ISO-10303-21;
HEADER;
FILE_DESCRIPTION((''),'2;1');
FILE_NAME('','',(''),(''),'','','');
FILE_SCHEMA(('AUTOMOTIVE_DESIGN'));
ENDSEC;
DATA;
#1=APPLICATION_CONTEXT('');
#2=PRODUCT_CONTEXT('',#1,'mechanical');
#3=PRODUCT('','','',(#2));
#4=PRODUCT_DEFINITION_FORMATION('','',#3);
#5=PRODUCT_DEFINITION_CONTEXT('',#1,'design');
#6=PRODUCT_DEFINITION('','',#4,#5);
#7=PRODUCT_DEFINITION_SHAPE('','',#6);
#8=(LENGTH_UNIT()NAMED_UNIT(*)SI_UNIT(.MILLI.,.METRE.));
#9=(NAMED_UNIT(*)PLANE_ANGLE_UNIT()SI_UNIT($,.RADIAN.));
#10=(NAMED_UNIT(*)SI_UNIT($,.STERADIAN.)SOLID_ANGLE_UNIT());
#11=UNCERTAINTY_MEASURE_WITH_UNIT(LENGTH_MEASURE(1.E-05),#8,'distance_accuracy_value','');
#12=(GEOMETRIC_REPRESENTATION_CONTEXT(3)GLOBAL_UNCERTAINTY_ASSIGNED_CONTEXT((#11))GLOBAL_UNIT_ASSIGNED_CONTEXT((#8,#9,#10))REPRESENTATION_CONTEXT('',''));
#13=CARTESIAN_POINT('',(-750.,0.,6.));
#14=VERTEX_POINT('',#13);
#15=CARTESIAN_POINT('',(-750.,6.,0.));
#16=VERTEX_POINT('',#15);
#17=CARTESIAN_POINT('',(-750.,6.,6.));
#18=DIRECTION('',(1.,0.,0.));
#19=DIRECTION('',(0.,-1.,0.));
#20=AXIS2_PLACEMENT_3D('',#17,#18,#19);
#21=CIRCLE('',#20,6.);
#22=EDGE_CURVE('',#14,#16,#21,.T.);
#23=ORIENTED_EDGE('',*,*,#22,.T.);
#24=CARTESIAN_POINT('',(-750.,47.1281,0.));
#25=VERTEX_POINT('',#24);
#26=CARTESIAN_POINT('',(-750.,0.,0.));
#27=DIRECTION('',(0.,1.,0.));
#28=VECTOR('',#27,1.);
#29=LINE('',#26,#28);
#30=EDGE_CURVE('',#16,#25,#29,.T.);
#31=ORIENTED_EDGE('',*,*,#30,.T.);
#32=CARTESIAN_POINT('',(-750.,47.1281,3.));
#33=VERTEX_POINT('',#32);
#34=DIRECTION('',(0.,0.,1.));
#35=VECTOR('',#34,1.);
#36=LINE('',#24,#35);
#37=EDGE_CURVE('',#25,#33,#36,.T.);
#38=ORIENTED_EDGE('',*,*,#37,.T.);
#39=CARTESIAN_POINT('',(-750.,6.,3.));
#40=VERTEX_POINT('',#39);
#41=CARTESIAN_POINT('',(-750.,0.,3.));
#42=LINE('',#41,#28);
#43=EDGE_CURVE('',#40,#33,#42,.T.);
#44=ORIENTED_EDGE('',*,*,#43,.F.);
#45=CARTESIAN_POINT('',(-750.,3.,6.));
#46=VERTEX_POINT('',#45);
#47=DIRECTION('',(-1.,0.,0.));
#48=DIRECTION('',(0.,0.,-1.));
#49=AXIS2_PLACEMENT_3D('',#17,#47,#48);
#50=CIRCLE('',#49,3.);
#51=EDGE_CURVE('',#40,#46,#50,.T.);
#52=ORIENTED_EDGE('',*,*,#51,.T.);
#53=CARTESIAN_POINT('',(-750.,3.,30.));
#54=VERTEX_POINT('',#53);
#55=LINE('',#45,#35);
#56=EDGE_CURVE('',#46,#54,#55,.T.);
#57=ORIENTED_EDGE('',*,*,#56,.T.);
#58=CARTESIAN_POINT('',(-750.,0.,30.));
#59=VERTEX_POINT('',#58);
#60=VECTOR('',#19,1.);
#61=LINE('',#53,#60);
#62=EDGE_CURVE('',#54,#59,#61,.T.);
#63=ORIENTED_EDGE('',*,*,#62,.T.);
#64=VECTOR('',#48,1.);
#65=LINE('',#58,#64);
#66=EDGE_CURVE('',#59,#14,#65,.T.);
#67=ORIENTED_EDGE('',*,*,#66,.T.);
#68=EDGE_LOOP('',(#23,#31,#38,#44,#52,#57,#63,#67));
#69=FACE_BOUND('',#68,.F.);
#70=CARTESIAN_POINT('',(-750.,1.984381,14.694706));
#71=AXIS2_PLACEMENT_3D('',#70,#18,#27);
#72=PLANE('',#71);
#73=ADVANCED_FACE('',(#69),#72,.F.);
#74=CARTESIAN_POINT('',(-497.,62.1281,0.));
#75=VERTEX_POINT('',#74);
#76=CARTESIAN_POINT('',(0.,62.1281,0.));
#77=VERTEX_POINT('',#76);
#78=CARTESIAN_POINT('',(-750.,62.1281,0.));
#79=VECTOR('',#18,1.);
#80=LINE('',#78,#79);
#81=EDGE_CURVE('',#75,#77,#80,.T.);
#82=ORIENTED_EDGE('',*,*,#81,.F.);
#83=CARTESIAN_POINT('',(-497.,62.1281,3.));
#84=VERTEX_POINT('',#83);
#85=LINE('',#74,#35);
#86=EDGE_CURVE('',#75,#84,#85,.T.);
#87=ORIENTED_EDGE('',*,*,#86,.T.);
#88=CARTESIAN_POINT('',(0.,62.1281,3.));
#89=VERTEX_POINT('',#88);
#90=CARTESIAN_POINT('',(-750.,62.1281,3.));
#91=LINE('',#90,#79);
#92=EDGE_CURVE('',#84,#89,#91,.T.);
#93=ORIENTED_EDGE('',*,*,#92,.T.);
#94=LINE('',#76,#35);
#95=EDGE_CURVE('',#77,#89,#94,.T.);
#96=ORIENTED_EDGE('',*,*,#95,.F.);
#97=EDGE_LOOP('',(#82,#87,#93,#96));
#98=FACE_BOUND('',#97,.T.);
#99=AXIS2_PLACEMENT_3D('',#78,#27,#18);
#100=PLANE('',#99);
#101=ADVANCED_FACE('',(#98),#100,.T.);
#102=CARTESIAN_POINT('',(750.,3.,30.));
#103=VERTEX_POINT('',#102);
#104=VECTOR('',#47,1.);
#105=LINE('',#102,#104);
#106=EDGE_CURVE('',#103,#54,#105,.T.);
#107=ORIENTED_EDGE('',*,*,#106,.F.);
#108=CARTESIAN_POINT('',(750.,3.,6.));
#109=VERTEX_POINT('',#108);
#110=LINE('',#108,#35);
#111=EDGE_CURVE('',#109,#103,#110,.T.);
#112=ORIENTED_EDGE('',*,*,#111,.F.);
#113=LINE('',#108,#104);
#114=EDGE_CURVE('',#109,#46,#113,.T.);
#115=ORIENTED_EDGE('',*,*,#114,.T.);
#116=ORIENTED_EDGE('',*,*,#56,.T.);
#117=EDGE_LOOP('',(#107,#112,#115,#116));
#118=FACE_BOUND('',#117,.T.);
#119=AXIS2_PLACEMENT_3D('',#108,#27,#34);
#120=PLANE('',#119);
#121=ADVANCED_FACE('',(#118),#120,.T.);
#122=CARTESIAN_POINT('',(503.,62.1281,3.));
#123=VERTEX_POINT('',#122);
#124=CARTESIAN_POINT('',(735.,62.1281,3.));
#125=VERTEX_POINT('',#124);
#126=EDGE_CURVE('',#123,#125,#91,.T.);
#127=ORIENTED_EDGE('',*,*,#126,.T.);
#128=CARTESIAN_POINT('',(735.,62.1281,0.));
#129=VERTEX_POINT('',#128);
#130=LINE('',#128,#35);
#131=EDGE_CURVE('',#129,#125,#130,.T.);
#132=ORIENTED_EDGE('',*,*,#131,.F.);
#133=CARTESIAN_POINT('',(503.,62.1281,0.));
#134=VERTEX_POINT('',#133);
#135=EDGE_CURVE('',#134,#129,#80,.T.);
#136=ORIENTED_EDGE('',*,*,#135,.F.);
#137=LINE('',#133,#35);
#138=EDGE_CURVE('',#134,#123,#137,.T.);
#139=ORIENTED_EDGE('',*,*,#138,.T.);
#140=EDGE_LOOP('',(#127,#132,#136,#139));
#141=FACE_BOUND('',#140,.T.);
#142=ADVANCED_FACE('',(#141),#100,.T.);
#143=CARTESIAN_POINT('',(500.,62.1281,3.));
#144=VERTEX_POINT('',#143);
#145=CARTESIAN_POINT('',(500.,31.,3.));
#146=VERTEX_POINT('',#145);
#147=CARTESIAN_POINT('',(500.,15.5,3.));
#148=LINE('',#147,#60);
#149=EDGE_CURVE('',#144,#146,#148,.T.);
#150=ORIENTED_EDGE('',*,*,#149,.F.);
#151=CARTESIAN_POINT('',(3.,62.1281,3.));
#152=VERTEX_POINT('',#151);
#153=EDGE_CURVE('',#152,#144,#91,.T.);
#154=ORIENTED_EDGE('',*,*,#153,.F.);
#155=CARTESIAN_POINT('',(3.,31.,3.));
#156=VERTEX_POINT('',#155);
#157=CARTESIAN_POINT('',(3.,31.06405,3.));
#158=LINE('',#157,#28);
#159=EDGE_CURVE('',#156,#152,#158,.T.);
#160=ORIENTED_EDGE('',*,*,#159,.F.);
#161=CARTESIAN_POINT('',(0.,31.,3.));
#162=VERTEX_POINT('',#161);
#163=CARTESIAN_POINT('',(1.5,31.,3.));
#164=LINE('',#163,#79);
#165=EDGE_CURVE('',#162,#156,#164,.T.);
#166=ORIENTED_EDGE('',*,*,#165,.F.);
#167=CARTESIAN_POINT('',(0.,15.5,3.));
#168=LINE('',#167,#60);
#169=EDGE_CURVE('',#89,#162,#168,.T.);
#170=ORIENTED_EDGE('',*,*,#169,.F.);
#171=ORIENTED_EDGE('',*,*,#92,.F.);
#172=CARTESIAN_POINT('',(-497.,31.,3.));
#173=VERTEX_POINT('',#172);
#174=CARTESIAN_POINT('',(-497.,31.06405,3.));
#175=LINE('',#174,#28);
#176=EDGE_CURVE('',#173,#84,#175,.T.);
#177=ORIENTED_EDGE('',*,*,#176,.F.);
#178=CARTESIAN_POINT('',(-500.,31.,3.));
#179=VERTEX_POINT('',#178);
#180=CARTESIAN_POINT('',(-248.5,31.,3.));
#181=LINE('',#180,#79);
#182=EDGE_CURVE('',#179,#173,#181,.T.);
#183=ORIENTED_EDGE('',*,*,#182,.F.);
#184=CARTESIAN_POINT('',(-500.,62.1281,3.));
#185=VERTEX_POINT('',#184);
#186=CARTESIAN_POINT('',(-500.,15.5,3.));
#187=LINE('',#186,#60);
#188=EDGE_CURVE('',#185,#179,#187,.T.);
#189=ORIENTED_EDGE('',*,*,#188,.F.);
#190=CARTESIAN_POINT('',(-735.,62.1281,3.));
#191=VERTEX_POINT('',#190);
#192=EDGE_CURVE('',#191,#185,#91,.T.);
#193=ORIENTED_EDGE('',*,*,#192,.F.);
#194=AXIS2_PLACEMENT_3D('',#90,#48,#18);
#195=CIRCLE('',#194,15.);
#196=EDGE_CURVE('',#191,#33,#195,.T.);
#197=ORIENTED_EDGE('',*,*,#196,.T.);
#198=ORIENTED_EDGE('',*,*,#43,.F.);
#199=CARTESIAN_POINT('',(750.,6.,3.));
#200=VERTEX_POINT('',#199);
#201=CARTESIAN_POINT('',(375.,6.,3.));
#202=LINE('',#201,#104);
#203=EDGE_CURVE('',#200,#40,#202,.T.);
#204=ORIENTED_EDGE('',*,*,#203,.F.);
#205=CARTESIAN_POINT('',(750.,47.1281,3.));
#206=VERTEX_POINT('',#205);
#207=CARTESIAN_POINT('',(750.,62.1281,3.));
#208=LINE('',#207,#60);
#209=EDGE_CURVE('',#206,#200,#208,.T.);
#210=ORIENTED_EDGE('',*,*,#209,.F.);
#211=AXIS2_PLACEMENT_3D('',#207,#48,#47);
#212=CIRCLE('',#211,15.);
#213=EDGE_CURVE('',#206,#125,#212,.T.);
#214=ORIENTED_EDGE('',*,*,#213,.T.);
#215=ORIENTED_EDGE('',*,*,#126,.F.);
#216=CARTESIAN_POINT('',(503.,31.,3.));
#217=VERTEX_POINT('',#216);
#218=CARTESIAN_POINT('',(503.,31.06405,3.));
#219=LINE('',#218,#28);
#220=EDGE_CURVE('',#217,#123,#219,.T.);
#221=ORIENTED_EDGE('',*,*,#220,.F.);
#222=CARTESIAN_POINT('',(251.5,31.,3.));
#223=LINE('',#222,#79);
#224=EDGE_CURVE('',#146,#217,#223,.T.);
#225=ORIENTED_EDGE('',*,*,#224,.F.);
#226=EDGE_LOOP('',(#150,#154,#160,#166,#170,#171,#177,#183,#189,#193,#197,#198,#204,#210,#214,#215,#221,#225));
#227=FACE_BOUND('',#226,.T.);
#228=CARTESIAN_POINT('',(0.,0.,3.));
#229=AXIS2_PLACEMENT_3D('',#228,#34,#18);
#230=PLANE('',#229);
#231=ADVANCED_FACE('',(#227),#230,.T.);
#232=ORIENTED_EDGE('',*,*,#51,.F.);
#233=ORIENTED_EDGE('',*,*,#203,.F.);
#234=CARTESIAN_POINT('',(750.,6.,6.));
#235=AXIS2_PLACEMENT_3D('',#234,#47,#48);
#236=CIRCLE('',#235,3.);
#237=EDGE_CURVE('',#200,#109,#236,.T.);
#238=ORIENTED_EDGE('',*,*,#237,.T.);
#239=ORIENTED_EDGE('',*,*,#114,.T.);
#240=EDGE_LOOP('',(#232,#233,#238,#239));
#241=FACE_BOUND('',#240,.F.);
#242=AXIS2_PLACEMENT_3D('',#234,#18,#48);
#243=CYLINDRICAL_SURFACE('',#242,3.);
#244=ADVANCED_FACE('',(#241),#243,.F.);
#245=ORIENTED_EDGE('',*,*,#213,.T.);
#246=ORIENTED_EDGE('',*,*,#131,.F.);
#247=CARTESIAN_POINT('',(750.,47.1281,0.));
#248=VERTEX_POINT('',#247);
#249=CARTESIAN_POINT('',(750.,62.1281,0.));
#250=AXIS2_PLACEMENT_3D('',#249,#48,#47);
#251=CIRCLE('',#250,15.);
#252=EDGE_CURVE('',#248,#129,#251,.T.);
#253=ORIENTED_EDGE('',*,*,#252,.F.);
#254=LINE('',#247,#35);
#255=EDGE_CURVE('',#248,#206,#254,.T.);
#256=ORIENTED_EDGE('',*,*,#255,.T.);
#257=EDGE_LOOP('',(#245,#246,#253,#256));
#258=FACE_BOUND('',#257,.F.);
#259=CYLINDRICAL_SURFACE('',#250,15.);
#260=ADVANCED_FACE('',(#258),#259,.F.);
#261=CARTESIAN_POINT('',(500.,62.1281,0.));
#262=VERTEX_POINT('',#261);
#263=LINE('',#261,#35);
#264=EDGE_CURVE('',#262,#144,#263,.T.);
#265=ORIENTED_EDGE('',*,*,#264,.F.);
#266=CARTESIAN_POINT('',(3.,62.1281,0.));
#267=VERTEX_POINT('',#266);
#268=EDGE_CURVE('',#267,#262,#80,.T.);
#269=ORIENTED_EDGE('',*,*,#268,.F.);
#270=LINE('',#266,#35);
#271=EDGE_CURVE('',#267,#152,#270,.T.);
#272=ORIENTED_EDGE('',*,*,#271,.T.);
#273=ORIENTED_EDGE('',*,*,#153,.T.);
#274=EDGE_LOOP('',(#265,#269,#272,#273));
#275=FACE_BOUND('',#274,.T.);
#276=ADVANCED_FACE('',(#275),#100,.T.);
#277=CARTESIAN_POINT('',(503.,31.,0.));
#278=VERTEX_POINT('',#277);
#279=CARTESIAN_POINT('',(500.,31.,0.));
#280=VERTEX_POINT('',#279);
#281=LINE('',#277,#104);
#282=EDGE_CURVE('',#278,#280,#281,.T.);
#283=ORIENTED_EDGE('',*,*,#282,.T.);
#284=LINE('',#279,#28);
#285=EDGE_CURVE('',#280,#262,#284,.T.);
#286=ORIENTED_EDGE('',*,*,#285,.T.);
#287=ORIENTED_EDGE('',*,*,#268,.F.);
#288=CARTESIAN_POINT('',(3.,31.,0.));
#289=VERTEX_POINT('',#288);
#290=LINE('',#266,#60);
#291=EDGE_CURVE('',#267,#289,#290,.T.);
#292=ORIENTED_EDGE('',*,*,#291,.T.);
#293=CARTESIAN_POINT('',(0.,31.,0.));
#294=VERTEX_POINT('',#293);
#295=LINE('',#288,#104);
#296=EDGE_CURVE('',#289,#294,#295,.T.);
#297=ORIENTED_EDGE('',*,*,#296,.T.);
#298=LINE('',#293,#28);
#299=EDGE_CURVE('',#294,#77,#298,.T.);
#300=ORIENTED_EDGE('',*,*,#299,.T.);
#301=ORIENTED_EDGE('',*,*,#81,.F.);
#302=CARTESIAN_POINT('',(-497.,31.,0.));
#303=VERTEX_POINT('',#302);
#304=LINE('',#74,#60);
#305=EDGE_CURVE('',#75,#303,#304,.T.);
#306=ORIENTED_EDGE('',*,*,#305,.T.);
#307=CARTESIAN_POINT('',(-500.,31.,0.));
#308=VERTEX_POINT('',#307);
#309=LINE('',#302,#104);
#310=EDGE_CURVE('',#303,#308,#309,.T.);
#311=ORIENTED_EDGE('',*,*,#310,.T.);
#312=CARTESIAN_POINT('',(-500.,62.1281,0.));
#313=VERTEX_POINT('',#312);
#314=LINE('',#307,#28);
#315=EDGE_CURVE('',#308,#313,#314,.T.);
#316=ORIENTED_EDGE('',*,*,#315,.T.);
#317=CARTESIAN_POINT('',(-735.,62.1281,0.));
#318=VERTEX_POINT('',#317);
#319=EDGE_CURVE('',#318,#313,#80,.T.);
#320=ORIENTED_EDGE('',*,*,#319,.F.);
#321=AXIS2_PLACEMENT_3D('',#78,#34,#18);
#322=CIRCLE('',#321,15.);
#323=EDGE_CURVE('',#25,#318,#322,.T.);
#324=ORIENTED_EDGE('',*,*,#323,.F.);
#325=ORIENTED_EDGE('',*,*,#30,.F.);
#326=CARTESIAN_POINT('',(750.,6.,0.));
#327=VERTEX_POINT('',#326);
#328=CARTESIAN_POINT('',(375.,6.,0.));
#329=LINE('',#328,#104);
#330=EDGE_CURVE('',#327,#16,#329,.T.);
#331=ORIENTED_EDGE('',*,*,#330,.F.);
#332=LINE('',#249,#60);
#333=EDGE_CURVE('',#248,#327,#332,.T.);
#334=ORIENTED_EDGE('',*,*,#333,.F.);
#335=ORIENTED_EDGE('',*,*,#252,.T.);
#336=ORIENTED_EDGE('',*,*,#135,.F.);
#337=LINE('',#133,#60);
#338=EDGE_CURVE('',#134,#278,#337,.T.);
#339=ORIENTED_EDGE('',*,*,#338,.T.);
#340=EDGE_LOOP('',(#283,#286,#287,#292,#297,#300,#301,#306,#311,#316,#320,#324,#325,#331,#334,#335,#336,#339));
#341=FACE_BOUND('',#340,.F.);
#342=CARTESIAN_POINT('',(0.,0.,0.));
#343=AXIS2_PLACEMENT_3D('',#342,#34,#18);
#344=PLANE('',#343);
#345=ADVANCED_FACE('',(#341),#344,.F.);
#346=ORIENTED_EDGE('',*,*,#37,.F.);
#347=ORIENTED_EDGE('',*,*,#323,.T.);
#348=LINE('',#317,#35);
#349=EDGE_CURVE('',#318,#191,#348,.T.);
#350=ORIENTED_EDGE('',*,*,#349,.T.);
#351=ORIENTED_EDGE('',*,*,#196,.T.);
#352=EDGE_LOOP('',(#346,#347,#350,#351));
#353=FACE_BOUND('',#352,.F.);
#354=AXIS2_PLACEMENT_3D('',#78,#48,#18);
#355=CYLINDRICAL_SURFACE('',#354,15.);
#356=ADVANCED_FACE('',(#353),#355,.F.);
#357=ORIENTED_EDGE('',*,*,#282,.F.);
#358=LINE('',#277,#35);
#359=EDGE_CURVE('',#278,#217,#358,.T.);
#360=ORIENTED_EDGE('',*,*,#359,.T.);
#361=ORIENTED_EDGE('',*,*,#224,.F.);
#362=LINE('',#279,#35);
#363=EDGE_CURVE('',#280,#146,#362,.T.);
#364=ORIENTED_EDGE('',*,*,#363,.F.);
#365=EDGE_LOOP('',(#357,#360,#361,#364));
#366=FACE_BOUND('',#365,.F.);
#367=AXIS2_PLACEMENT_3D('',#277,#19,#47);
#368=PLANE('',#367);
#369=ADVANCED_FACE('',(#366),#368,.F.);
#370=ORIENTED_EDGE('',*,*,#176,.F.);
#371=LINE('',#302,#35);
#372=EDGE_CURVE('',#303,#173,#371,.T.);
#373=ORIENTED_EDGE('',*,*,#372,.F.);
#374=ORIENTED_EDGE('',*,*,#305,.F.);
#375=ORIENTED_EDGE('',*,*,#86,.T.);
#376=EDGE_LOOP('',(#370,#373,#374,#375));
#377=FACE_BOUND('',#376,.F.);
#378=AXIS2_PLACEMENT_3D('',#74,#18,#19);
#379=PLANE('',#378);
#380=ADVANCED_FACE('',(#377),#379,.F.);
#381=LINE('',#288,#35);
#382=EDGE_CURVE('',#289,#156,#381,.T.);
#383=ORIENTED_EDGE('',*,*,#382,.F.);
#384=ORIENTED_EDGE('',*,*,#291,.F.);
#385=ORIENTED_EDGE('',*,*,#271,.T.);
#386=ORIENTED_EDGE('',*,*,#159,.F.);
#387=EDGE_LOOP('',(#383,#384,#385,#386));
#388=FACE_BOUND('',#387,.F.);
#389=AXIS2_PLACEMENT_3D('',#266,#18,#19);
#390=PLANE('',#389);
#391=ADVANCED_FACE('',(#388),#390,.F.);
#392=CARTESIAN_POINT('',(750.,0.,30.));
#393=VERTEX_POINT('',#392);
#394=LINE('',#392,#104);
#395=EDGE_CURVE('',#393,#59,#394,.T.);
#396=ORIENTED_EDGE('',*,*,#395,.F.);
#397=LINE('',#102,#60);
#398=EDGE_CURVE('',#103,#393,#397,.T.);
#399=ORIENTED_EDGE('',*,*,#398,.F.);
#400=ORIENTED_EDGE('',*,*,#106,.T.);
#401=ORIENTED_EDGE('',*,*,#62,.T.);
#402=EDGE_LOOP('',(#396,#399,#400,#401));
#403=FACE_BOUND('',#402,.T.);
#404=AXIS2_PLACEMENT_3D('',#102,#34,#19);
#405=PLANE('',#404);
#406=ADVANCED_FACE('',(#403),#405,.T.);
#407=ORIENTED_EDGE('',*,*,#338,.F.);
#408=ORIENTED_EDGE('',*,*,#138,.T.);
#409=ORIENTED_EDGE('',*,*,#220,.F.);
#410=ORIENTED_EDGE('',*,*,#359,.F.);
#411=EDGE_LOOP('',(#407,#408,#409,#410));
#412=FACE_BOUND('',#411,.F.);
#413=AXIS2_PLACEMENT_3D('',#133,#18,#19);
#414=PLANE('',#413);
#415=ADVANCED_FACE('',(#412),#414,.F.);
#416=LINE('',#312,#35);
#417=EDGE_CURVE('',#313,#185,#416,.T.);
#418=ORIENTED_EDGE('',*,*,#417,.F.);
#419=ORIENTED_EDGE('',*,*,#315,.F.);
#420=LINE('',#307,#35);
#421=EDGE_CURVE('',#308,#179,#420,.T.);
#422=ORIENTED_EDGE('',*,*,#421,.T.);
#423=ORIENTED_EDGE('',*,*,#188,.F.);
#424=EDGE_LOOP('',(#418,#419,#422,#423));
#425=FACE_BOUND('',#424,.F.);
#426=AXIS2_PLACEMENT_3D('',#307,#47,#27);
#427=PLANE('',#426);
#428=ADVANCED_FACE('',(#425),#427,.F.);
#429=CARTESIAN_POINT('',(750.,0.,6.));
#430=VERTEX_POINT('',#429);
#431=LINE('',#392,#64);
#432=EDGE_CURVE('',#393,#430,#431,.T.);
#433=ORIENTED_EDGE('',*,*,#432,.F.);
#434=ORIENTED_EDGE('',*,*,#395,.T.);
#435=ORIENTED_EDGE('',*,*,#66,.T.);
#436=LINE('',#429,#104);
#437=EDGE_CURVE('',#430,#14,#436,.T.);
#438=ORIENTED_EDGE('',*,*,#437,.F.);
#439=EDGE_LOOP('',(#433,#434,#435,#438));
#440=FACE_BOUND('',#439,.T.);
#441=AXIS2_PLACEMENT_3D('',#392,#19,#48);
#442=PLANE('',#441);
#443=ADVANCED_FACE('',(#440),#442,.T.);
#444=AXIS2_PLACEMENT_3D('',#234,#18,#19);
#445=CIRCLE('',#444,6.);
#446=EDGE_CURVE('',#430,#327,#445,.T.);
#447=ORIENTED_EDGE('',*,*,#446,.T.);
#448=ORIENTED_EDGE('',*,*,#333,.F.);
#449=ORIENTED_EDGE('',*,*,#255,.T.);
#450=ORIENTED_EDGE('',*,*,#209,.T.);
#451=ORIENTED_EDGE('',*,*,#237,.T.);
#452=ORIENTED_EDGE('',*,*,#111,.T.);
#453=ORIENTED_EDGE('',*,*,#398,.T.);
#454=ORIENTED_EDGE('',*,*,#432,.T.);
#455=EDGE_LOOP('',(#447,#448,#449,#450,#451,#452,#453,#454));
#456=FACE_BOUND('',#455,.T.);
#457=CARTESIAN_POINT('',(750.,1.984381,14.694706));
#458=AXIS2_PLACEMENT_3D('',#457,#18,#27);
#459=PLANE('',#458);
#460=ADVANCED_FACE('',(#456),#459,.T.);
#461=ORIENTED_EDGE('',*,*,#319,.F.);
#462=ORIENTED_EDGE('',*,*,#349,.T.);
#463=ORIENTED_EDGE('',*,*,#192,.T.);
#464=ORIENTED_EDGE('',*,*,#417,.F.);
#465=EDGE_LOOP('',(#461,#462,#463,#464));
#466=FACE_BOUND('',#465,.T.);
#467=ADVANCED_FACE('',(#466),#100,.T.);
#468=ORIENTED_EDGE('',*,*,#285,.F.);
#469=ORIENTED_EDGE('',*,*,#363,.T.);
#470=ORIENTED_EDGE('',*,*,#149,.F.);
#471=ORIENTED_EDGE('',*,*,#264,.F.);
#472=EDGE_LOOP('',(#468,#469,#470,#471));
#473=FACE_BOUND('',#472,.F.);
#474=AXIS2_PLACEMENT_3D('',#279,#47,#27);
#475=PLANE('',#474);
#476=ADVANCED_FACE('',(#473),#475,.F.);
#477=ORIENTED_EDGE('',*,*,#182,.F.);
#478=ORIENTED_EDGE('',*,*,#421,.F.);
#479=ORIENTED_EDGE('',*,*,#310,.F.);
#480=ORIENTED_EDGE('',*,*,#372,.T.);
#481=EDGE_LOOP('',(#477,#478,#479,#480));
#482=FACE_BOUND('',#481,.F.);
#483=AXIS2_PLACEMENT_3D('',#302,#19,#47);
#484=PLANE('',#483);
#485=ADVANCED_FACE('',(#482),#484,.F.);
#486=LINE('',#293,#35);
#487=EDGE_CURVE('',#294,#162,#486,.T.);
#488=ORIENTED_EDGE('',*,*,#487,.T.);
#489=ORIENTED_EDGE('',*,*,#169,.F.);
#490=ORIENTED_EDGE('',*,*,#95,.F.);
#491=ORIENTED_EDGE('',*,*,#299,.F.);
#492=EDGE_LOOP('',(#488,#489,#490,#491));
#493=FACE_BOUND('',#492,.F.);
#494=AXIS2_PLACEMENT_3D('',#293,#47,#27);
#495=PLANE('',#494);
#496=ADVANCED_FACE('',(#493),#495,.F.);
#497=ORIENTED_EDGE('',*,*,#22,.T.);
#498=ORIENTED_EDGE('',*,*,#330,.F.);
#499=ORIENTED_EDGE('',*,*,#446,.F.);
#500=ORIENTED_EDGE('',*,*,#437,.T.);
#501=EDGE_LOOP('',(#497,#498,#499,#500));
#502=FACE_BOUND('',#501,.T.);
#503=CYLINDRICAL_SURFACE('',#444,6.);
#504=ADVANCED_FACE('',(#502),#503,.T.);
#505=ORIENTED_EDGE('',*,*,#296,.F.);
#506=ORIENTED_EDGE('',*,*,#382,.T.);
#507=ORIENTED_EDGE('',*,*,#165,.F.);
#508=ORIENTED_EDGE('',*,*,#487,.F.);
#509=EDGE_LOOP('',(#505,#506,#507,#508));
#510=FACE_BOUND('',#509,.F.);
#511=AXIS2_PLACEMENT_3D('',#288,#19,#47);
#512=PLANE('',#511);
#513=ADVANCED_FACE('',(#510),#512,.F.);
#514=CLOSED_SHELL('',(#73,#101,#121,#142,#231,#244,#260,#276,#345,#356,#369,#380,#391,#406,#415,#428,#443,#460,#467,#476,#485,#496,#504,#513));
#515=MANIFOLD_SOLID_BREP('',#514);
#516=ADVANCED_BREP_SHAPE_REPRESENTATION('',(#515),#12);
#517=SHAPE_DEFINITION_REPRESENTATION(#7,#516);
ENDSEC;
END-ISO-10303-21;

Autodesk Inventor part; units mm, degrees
ref_plane "YZ Plane" through (0, 0, 0) normal (1, 0, 0) x (0, 1, 0)
ref_plane "XZ Plane" through (0, 0, 0) normal (0, 1, 0) x (-1, 0, 0)
ref_plane "XY Plane" through (0, 0, 0) normal (0, 0, 1) x (1, 0, 0)
sketch "Sketch1" plane through (0, 0, 0) normal (0, 0, 1) x (1, 0, 0)
  line L0 (-750, 62.1281) -> (750, 62.1281)
  line L1 (750, 62.1281) -> (750, 0)
  line L2 (750, 0) -> (-750, 0)
  line L3 (-750, 0) -> (-750, 62.1281)
  point P0 (0, 0)
  point P1 (0, 0)
  dimension "d0" = 1500
  dimension "d1" = 62.1281
extrude "Plate1" add sketch "Sketch1" along normal blind 3
sketch "Sketch2" plane through (750, 3, 0) normal (0, -1, 0) x (1, 0, 0)
  line L0 (-1500, 0) -> (0, 0)
  line L1 (0, 0) -> (0, 30)
  line L2 (0, 30) -> (-1500, 30)
  line L3 (-1500, 30) -> (-1500, 0)
edge flange "Flange1" height 30 angle 90 thickness 3 bend radius 3 thickness toward (0, -1, 0) relief tear relief width 3 relief depth 1.5 edges at (0, 0, 3) wall of the first edge with corners at (-750, 3, 0) (750, 3, 0) (750, 3, 30) (-750, 3, 30)
bend "Bend1"
corner "Corner1"
sketch "Sketch5" plane through (0, 0, 0) normal (0, 0, -1) x (-1, 0, 0)
  line L0 (750, 62.1281) -> (-750, 62.1281) projected
  line L1 (497, 62.1281) -> (497, 31)
  line L2 (497, 31) -> (500, 31)
  line L3 (500, 31) -> (500, 62.1281)
  line L4 (750, 0) -> (-750, 0) projected
  point P0 (0, 0)
  dimension "d18" = 3
  dimension "d19" = 250
  dimension "d20" = 31
extrude "Extrusion1" cut sketch "Sketch5" against normal through all
pattern_linear "Rectangular Pattern1" count 3 spacing 500 along (1, 0, 0) of "Extrusion1"
sketch "Sketch6" plane through (0, 0, 0) normal (0, 0, -1) x (-1, 0, 0)
  line L0 (-750, 62.1281) -> (-750, 6) projected
  circle A0 centre (-750, 62.1281) radius 15
  line L1 (-750, 62.1281) -> (-503, 62.1281) projected
  point P0 (0, 0)
  point P1 (-735, 62.1281)
  point P2 (-750, 47.1281)
  dimension "d24" = 30
extrude "Extrusion2" cut sketch "Sketch6" against normal through all contours L1 A0 L0 picked at (-740.1254, 61.0155)
mirror "Mirror1" about plane through (0, 0, 0) normal (1, 0, 0) of "Extrusion2"
equation "\"d1\" = Стрингер_2"
equation "\"d18\" = Thickness"
equation "\"d2\" = Thickness"
equation "\"d3\" = BendReliefWidth"
equation "\"d4\" = BendReliefDepth"
equation "\"d5\" = MinimumRemnant"
equation "\"d6\" = TransitionRadius"
equation "\"d9\" = BendRadius"
equation "\"d10\" = CornerReliefSize"
equation "\"d11\" = GapSize"
equation "\"d12\" = JacobiRadiusSize"
equation "\"BendRadius\" = Thickness"
equation "\"BendReliefWidth\" = Thickness"
equation "\"BendReliefDepth\" = 0.5 * Thickness"
equation "\"CornerReliefSize\" = 4 * Thickness"
equation "\"MinimumRemnant\" = 2 * Thickness"
equation "\"TransitionRadius\" = BendRadius"
equation "\"JacobiRadiusSize\" = BendRadius"
equation "\"GapSize\" = Thickness"
equation "\"qqqqqq\" = 67.35706"
equation "\"Стрингер_2\" = 62.128061"
equation "\"Thickness\" = 3"
properties part number "МОО 052 стрингер спина 2"
